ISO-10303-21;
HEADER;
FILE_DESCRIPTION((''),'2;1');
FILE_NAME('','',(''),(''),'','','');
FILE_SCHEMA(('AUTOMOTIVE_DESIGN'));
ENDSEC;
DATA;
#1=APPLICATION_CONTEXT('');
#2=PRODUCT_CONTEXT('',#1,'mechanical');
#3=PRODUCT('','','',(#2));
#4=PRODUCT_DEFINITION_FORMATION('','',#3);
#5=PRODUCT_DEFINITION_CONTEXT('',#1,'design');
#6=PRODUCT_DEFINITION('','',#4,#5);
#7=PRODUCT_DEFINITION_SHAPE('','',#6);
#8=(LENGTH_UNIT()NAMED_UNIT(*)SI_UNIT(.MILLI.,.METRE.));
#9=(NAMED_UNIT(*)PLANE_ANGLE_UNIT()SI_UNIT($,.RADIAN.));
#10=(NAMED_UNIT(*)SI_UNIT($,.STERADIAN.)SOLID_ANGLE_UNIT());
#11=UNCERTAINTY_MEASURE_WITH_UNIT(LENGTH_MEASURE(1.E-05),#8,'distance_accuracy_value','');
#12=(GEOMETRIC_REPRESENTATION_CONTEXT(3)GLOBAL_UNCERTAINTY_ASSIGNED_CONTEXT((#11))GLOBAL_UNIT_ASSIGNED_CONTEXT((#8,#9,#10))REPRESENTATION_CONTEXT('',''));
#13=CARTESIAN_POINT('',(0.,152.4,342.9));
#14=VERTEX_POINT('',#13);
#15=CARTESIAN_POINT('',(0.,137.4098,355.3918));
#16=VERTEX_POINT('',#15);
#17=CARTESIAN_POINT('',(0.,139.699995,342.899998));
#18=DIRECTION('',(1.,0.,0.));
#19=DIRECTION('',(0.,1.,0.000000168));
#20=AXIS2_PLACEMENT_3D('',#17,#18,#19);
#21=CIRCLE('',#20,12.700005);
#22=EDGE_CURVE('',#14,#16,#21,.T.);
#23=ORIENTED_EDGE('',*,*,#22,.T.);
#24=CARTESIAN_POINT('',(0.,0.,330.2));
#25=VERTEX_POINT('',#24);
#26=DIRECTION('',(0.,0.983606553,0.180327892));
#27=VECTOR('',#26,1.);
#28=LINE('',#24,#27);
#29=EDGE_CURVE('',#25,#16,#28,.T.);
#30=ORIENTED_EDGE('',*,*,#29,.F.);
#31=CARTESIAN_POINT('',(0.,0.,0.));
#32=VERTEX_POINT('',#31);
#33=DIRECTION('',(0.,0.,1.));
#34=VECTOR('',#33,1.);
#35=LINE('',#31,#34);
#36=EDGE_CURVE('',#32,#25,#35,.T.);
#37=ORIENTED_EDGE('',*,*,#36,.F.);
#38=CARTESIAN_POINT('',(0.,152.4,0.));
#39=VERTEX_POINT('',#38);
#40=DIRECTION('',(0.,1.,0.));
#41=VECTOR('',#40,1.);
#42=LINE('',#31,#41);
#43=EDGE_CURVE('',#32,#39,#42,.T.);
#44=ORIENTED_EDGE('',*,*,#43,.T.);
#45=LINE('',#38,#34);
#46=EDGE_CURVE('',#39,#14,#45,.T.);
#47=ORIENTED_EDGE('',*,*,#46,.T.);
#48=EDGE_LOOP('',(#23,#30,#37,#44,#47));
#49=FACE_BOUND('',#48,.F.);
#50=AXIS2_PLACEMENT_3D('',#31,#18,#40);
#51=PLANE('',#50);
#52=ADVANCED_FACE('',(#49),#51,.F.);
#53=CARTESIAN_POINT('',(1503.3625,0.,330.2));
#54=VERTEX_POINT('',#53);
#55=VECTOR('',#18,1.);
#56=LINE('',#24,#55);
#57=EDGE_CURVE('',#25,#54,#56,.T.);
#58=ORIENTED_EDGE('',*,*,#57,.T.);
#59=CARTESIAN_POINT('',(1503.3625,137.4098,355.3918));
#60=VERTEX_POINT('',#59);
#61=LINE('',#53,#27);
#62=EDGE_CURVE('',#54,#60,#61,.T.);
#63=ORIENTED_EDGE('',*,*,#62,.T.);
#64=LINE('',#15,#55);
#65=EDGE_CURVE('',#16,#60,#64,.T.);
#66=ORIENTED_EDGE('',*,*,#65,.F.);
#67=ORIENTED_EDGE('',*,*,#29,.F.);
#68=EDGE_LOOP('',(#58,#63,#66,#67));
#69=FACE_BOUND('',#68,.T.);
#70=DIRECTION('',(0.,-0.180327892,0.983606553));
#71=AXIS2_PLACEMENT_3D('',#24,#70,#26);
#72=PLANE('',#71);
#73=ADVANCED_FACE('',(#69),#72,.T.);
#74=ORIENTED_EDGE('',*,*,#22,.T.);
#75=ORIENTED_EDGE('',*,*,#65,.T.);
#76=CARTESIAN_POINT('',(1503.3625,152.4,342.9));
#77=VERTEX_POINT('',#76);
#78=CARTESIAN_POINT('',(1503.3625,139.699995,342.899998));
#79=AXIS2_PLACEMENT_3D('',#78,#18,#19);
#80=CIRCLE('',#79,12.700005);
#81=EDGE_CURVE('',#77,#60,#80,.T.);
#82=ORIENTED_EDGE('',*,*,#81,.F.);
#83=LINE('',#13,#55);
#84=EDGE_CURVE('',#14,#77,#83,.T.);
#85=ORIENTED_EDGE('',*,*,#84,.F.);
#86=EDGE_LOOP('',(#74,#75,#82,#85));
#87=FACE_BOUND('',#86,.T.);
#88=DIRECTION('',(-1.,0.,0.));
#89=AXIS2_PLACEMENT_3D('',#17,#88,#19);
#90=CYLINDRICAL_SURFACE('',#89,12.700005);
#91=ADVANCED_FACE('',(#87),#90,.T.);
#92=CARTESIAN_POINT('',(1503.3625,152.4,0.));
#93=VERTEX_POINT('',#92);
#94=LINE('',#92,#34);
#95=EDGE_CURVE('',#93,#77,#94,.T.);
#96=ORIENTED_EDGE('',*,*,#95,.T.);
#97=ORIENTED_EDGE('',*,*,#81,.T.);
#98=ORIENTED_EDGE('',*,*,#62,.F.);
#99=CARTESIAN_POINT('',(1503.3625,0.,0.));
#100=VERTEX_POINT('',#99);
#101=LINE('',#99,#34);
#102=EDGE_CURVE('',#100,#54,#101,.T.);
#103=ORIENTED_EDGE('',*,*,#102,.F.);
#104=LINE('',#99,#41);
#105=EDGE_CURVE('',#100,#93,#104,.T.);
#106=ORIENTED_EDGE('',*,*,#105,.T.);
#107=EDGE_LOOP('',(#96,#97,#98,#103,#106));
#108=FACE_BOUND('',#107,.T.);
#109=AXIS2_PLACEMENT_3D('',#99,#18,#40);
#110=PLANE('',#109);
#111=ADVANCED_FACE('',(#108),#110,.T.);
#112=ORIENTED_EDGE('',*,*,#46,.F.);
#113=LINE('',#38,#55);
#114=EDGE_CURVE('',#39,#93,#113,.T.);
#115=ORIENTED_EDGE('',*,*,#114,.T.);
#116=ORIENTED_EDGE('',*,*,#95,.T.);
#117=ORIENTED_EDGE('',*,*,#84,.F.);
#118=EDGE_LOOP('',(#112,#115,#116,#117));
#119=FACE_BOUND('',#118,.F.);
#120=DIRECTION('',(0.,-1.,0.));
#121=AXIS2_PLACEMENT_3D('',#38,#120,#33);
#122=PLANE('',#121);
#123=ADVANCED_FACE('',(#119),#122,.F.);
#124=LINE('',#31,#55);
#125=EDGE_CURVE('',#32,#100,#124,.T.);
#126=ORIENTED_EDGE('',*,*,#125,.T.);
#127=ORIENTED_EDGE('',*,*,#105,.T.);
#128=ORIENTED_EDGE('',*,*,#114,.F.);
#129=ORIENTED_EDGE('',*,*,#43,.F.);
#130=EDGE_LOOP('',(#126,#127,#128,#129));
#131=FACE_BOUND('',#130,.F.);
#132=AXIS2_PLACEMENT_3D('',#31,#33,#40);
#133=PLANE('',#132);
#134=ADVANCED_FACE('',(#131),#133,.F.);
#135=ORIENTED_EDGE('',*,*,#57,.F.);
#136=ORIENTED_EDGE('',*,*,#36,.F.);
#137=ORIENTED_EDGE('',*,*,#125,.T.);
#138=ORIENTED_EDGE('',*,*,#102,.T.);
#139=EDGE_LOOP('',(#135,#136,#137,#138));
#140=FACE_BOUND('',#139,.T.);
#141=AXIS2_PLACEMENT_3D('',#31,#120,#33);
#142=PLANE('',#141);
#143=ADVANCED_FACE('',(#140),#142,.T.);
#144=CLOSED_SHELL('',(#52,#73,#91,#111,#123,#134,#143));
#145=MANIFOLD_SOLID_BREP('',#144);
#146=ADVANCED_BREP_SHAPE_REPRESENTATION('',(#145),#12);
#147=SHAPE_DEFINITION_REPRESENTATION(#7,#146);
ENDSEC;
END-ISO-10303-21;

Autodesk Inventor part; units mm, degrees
ref_plane "YZ Plane" through (0, 0, 0) normal (1, 0, 0) x (0, 1, 0)
ref_plane "XZ Plane" through (0, 0, 0) normal (0, 1, 0) x (-1, 0, 0)
ref_plane "XY Plane" through (0, 0, 0) normal (0, 0, 1) x (1, 0, 0)
sketch "Profile" plane through (0, 0, 0) normal (0, 0, 1) x (1, 0, 0)
  line L0 (0, 0) -> (0, 330.2)
  line L1 (0, 0) -> (152.4, 0)
  line L2 (152.4, 0) -> (152.4, 342.9)
  line L3 (152.4, 342.9) -> (139.7, 342.9) construction
  line L4 (152.4, 342.9) -> (139.7, 342.9) construction
  arc A0 (152.4, 342.9) -> (137.4098, 355.3918) centre (139.7, 342.9) ccw
  line L5 (0, 330.2) -> (137.4098, 355.3918)
  dimension "d0" = 330.2
  dimension "d1" = 152.4
  dimension "d2" = 342.9
  dimension "d3" = 12.7
  dimension "d4" = 12.7
sketch "Sketch1" plane through (0, 0, 0) normal (1, 0, 0) x (0, 1, 0)
  line L0 (0, 0) -> (0, 330.2)
  line L1 (0, 0) -> (152.4, 0)
  line L2 (152.4, 0) -> (152.4, 342.9)
  line L3 (152.4, 342.9) -> (139.7, 342.9) construction
  line L4 (152.4, 342.9) -> (139.7, 342.9) construction
  arc A0 (152.4, 342.9) -> (137.4098, 355.3918) centre (139.7, 342.9) ccw
  line L5 (0, 330.2) -> (137.4098, 355.3918)
extrude "Extrusion1" add sketch "Sketch1" along normal blind 1503.3625
properties part number "J" material "Granite, Cut, Polished"
